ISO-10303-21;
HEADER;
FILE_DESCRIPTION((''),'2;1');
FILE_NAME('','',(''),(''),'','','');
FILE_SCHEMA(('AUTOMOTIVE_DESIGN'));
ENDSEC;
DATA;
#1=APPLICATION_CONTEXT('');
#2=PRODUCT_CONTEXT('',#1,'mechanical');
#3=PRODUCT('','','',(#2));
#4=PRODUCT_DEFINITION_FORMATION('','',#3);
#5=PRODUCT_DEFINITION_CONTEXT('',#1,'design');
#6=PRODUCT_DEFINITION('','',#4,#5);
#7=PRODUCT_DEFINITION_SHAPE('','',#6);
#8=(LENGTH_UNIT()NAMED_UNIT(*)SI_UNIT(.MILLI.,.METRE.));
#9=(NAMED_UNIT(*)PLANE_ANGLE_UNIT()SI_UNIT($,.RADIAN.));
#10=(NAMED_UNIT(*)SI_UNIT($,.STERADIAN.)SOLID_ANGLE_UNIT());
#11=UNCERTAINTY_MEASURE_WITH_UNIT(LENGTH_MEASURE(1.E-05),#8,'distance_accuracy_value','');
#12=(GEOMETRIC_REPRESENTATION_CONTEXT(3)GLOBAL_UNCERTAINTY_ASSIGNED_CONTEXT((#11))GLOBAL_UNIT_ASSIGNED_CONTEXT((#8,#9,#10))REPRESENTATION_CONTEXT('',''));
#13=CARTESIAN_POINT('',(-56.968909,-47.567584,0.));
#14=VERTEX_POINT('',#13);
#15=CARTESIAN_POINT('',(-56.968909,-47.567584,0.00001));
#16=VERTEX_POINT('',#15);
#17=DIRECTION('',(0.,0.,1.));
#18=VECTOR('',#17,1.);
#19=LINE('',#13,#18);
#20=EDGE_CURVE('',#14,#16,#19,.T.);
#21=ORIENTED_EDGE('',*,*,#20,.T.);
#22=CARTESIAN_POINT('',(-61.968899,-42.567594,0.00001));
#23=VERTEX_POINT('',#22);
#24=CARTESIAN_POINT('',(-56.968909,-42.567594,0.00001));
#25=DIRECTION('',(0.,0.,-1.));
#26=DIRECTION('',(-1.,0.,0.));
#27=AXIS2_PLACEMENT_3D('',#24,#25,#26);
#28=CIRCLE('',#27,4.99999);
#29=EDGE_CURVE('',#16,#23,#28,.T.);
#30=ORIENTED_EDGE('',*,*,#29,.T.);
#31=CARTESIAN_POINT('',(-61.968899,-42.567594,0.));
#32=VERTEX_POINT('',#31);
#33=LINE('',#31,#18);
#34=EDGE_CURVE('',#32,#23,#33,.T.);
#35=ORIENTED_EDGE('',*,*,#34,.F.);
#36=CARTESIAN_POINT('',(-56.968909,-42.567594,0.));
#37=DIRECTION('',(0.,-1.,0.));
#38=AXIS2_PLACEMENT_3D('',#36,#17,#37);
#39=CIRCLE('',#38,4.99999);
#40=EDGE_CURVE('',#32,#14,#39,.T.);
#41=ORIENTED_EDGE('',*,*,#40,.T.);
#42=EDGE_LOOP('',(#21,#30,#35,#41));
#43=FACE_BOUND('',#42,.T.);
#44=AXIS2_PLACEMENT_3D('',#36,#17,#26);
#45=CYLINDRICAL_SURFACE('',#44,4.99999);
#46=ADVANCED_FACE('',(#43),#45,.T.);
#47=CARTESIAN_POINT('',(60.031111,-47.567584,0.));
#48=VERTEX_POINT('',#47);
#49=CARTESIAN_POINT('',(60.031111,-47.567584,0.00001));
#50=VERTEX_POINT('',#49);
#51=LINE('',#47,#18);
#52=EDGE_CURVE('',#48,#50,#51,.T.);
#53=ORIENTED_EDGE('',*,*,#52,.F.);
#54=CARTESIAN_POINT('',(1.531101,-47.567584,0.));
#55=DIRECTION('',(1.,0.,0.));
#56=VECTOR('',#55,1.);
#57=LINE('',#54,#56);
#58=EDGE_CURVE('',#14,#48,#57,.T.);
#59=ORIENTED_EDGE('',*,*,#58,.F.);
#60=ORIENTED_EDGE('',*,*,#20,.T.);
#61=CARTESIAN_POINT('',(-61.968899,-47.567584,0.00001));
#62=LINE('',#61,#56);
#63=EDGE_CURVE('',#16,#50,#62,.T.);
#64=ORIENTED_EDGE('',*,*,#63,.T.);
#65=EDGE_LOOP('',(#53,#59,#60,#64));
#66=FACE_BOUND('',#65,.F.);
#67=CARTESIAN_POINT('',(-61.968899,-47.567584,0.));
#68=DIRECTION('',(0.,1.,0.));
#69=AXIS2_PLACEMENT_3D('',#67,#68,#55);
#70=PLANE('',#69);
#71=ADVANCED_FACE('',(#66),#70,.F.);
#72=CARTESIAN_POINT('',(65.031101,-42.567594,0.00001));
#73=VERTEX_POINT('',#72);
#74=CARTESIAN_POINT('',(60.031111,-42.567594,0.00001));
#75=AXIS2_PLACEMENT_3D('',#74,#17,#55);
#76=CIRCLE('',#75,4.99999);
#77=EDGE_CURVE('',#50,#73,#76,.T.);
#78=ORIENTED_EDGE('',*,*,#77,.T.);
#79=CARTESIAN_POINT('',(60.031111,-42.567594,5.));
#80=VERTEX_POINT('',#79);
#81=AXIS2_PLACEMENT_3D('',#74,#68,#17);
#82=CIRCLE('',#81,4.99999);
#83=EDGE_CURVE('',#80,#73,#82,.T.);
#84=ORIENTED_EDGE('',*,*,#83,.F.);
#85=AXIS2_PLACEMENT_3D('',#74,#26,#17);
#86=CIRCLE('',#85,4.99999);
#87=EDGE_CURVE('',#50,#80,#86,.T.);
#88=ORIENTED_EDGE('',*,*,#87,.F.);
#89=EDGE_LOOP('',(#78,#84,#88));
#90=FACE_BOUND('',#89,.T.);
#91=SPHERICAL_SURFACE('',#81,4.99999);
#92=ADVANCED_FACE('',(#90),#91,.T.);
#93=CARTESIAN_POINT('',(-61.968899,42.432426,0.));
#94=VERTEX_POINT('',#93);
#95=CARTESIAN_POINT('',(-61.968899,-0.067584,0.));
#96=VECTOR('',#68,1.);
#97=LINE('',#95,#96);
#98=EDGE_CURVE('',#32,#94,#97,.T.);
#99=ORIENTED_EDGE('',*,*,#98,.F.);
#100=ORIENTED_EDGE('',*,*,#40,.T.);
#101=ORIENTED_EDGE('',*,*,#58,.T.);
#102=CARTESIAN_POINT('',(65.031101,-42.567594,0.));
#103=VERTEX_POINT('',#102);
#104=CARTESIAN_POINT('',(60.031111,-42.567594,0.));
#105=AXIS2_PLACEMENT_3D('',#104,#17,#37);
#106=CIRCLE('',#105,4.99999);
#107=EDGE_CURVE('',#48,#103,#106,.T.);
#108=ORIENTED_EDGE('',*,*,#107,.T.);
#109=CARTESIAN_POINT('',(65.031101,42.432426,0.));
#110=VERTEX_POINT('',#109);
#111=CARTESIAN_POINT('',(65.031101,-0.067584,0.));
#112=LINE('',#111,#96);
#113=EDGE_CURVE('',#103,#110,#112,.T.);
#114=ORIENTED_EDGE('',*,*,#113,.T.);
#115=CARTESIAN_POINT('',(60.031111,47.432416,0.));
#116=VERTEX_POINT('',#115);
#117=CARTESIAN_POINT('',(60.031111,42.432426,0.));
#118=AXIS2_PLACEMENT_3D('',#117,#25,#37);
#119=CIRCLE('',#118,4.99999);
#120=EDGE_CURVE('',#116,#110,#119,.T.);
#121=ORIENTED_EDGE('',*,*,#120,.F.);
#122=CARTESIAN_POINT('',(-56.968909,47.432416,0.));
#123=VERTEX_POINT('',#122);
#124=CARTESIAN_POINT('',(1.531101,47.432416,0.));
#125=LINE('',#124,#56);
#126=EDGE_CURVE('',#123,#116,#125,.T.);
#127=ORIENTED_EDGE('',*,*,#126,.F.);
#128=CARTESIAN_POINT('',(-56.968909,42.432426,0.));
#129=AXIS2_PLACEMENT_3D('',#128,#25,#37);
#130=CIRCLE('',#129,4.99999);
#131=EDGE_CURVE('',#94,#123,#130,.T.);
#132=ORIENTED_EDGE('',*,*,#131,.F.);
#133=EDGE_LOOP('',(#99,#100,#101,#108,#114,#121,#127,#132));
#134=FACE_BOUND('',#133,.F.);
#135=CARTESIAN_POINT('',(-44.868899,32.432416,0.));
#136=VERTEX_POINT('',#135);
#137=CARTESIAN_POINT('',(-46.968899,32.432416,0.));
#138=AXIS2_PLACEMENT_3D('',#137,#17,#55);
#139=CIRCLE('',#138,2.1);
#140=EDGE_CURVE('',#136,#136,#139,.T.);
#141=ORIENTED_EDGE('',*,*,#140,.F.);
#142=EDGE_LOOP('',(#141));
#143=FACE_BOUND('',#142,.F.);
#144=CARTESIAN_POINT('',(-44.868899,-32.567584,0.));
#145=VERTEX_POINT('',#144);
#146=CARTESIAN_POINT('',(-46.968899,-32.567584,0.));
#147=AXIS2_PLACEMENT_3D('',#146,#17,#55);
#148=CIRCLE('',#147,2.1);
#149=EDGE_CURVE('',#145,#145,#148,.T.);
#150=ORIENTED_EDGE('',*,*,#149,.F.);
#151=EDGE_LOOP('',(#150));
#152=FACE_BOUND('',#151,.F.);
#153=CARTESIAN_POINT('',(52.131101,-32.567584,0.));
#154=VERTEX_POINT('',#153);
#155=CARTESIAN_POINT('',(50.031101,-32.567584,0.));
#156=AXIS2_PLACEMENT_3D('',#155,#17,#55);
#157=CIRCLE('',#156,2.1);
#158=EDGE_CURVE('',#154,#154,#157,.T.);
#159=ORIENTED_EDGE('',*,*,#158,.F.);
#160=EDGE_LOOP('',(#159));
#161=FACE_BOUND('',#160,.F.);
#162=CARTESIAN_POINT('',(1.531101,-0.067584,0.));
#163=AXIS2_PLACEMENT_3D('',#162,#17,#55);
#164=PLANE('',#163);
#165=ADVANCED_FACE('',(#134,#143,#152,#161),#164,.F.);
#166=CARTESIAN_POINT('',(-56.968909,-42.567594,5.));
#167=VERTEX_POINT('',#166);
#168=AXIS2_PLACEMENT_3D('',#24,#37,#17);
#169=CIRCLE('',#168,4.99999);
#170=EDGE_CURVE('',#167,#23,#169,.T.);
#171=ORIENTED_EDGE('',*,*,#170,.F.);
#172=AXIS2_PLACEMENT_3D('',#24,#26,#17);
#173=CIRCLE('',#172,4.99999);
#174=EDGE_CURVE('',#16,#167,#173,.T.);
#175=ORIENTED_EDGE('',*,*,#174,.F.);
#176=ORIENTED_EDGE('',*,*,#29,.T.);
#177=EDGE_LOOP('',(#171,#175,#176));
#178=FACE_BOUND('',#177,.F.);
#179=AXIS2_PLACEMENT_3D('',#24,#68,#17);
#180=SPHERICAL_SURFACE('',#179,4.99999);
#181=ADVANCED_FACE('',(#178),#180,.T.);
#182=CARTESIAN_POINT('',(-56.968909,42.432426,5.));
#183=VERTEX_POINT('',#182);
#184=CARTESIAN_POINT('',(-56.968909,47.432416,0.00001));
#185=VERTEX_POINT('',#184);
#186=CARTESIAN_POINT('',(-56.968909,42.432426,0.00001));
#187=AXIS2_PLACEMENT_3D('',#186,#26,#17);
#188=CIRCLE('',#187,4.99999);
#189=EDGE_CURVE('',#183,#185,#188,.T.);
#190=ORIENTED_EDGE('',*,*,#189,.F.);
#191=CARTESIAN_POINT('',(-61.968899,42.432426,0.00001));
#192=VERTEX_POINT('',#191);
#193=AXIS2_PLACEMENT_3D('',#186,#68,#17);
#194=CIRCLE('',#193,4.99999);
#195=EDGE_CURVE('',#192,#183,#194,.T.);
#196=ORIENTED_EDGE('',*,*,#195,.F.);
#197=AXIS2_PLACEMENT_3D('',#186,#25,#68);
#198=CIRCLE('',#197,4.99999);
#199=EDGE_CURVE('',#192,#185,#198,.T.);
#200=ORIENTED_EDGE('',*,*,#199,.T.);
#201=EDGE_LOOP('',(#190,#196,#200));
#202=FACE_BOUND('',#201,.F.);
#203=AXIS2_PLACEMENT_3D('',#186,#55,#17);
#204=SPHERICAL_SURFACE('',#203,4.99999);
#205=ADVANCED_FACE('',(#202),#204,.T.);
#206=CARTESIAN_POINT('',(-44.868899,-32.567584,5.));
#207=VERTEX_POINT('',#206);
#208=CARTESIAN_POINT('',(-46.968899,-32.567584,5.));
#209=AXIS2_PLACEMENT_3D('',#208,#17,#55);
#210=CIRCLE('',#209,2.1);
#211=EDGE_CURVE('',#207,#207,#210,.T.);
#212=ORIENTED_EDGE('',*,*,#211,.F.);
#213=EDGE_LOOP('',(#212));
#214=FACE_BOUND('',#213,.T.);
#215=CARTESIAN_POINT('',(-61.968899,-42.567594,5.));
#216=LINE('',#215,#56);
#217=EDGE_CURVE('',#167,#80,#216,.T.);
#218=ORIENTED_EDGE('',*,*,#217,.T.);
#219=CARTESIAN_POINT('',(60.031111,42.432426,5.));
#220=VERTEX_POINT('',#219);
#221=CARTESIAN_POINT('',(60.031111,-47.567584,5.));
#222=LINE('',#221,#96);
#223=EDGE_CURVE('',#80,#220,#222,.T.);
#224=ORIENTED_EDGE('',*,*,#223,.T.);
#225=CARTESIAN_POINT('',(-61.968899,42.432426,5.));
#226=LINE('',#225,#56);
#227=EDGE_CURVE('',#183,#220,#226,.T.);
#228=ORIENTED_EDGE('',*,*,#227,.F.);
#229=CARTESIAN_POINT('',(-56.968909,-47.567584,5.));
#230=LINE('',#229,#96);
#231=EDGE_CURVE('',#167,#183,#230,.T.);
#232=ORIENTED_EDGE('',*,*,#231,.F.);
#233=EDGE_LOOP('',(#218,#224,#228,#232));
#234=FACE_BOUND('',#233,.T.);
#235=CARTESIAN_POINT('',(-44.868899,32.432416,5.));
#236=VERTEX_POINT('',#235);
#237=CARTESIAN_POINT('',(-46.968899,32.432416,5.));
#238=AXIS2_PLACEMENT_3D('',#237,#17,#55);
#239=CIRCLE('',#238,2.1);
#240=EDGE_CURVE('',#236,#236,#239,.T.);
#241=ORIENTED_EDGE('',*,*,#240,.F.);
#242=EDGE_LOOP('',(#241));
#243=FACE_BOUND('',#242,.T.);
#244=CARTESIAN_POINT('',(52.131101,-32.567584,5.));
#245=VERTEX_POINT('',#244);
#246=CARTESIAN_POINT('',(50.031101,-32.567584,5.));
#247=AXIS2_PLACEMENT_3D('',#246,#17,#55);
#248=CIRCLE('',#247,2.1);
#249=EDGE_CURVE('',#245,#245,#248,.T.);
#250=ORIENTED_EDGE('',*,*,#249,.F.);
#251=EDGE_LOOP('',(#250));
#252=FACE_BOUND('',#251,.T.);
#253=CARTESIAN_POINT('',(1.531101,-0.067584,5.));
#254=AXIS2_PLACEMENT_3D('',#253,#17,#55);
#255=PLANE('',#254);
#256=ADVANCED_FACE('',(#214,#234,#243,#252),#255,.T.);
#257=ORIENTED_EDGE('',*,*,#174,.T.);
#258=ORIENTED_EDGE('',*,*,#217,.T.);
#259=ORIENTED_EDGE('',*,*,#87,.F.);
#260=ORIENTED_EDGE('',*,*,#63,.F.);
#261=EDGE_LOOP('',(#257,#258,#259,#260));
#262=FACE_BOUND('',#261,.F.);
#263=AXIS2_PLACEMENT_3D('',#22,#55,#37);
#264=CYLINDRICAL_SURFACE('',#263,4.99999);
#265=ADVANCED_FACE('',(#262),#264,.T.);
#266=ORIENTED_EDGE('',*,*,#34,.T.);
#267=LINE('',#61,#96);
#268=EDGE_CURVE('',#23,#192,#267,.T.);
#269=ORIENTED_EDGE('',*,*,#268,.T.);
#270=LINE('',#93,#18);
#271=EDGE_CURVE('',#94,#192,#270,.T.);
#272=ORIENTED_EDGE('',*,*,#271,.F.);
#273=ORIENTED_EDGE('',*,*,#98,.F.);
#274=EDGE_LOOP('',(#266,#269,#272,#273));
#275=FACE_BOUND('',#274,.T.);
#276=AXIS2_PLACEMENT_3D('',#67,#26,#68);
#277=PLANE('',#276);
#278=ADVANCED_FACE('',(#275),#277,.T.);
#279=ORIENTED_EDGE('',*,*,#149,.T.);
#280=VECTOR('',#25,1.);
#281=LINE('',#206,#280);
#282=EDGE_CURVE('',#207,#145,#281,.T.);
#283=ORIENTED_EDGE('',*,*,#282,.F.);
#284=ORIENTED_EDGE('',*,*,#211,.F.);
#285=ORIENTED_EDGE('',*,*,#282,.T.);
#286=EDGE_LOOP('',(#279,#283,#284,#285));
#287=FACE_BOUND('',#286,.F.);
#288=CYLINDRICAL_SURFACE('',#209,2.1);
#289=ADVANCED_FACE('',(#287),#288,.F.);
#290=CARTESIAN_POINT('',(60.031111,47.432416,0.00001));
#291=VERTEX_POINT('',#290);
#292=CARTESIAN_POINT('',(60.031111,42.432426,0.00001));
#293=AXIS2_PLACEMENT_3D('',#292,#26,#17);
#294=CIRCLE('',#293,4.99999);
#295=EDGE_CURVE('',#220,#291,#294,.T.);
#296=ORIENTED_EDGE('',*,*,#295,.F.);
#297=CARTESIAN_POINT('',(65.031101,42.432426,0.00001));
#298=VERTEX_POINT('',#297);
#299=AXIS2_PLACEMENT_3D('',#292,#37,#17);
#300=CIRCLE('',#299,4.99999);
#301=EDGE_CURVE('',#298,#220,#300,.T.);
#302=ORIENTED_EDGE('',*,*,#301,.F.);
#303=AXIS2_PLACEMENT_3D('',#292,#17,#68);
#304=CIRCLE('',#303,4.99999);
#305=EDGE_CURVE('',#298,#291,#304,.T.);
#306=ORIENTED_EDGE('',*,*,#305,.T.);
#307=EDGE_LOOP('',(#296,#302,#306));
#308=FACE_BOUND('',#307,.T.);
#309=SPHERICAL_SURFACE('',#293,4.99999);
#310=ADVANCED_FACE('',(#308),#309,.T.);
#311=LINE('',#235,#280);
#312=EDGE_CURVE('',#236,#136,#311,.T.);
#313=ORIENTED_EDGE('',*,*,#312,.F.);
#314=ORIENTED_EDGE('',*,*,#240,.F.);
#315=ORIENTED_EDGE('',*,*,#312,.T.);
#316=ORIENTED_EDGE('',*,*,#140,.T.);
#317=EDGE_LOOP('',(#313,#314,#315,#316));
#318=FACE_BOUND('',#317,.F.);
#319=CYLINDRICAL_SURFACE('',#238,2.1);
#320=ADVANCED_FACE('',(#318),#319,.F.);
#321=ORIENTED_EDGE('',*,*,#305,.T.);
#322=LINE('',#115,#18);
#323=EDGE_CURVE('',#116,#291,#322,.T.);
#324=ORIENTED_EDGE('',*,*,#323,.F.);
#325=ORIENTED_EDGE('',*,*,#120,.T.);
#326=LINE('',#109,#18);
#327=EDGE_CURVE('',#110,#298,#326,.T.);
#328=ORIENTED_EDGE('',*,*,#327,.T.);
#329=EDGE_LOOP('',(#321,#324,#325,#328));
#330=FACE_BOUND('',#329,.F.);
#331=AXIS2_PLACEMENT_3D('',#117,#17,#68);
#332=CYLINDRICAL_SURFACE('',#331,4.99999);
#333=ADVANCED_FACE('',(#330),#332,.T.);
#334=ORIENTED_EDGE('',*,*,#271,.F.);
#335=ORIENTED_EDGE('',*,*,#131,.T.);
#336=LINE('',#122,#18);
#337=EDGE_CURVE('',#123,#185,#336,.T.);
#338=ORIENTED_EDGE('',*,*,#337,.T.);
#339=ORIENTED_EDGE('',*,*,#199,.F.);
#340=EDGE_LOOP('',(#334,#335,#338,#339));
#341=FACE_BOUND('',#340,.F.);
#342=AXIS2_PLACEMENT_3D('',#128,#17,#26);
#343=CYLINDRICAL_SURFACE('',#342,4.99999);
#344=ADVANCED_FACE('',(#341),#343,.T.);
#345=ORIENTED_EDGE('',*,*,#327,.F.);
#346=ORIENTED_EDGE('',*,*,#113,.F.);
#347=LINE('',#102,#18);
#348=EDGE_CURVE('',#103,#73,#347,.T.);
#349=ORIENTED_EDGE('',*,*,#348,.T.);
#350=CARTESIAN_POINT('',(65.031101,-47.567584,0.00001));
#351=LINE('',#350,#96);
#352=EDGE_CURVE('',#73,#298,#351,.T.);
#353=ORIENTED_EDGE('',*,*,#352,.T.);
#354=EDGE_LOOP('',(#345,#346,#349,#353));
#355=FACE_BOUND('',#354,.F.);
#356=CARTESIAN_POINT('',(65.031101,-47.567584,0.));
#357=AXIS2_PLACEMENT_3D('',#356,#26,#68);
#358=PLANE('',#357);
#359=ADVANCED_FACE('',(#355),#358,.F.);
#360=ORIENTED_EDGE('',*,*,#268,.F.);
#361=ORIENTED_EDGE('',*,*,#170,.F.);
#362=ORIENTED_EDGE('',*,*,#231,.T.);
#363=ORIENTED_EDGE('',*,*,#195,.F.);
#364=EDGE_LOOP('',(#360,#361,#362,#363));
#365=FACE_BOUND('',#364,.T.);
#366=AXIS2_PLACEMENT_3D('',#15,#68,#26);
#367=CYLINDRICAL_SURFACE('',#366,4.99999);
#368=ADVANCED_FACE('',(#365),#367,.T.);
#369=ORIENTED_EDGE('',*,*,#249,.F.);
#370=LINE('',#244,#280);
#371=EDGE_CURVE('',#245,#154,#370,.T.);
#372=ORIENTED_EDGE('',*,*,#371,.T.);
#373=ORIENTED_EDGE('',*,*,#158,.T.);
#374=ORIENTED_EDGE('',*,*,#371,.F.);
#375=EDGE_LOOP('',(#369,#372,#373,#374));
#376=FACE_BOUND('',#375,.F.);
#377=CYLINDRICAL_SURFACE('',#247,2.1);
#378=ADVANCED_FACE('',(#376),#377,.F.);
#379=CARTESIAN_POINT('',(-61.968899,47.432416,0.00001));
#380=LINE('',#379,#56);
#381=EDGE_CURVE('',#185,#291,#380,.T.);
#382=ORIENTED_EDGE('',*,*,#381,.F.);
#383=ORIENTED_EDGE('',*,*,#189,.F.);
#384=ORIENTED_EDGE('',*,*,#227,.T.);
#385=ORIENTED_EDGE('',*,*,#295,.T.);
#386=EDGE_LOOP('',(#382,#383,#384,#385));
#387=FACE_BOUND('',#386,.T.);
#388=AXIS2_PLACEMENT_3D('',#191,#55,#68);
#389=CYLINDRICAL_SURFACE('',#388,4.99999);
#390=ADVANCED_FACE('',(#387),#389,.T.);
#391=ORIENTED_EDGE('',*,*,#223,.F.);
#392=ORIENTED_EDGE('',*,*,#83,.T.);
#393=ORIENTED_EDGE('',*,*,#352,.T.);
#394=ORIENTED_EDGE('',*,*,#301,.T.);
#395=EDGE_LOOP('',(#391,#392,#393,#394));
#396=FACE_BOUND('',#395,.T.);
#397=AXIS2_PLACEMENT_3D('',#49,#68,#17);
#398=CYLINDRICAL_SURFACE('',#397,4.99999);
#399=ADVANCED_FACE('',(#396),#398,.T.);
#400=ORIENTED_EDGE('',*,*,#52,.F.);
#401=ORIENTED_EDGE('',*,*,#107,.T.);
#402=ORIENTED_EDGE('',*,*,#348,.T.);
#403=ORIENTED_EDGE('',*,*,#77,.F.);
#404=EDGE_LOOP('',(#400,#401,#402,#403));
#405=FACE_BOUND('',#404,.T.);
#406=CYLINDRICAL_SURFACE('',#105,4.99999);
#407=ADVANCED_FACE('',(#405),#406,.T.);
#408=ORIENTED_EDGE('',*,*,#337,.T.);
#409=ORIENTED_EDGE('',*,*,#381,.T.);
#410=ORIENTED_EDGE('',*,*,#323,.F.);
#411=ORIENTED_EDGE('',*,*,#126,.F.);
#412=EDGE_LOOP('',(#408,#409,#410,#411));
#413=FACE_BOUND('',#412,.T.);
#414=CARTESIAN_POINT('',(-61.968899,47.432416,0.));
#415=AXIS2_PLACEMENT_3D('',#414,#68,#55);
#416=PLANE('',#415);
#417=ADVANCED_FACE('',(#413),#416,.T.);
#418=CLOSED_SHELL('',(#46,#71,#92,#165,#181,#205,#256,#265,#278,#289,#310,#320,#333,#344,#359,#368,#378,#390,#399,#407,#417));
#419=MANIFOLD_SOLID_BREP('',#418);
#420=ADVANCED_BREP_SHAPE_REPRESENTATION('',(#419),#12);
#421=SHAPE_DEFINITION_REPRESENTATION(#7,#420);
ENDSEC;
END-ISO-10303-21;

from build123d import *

# Parameters (mm, degrees)
F0_W     = 127
F0_H     = 95
F1_DEPTH = 5
F2_R     = 2.1
F3_DEPTH = 5.001
F4_R     = 4.99999


# Not quite as in the source:
# - a fillet or chamfer is up to 0.001 mm smaller than in the source, because OpenCascade refuses the exact size


with BuildPart() as f1:
    # F0 (on Top) → F1 (new body)
    with BuildSketch(Plane.XY):
        with Locations((1.5311012896, -0.0675843805)):
            Rectangle(F0_W, F0_H)
    extrude(amount=F1_DEPTH)

    # F2 (on face) → F3 (cut, through all)
    with BuildSketch(Plane.XY.offset(5)):
        with Locations((-46.9688987104, 32.4324156195)):
            Circle(F2_R)
        with Locations((-46.9688987104, -32.5675843805)):
            Circle(F2_R)
        with Locations((50.0311012896, -32.5675843805)):
            Circle(F2_R)
    extrude(amount=-F3_DEPTH, mode=Mode.SUBTRACT)

    # F4 (radius 5 in the source; OpenCascade refuses exactly that, so slightly less here)
    f4_edges = [f1.edges().sort_by_distance(p)[0] for p in [
        (1.531101, 47.432416, 5),
        (65.031101, -0.067584, 5),
        (-61.968899, -0.067584, 5),
        (1.531101, -47.567584, 5),
        (-61.968899, -47.567584, 2.5),
        (-61.968899, 47.432416, 2.5),
        (65.031101, 47.432416, 2.5),
        (65.031101, -47.567584, 2.5),
    ]]
    fillet(f4_edges, radius=F4_R)


solid = f1.part
